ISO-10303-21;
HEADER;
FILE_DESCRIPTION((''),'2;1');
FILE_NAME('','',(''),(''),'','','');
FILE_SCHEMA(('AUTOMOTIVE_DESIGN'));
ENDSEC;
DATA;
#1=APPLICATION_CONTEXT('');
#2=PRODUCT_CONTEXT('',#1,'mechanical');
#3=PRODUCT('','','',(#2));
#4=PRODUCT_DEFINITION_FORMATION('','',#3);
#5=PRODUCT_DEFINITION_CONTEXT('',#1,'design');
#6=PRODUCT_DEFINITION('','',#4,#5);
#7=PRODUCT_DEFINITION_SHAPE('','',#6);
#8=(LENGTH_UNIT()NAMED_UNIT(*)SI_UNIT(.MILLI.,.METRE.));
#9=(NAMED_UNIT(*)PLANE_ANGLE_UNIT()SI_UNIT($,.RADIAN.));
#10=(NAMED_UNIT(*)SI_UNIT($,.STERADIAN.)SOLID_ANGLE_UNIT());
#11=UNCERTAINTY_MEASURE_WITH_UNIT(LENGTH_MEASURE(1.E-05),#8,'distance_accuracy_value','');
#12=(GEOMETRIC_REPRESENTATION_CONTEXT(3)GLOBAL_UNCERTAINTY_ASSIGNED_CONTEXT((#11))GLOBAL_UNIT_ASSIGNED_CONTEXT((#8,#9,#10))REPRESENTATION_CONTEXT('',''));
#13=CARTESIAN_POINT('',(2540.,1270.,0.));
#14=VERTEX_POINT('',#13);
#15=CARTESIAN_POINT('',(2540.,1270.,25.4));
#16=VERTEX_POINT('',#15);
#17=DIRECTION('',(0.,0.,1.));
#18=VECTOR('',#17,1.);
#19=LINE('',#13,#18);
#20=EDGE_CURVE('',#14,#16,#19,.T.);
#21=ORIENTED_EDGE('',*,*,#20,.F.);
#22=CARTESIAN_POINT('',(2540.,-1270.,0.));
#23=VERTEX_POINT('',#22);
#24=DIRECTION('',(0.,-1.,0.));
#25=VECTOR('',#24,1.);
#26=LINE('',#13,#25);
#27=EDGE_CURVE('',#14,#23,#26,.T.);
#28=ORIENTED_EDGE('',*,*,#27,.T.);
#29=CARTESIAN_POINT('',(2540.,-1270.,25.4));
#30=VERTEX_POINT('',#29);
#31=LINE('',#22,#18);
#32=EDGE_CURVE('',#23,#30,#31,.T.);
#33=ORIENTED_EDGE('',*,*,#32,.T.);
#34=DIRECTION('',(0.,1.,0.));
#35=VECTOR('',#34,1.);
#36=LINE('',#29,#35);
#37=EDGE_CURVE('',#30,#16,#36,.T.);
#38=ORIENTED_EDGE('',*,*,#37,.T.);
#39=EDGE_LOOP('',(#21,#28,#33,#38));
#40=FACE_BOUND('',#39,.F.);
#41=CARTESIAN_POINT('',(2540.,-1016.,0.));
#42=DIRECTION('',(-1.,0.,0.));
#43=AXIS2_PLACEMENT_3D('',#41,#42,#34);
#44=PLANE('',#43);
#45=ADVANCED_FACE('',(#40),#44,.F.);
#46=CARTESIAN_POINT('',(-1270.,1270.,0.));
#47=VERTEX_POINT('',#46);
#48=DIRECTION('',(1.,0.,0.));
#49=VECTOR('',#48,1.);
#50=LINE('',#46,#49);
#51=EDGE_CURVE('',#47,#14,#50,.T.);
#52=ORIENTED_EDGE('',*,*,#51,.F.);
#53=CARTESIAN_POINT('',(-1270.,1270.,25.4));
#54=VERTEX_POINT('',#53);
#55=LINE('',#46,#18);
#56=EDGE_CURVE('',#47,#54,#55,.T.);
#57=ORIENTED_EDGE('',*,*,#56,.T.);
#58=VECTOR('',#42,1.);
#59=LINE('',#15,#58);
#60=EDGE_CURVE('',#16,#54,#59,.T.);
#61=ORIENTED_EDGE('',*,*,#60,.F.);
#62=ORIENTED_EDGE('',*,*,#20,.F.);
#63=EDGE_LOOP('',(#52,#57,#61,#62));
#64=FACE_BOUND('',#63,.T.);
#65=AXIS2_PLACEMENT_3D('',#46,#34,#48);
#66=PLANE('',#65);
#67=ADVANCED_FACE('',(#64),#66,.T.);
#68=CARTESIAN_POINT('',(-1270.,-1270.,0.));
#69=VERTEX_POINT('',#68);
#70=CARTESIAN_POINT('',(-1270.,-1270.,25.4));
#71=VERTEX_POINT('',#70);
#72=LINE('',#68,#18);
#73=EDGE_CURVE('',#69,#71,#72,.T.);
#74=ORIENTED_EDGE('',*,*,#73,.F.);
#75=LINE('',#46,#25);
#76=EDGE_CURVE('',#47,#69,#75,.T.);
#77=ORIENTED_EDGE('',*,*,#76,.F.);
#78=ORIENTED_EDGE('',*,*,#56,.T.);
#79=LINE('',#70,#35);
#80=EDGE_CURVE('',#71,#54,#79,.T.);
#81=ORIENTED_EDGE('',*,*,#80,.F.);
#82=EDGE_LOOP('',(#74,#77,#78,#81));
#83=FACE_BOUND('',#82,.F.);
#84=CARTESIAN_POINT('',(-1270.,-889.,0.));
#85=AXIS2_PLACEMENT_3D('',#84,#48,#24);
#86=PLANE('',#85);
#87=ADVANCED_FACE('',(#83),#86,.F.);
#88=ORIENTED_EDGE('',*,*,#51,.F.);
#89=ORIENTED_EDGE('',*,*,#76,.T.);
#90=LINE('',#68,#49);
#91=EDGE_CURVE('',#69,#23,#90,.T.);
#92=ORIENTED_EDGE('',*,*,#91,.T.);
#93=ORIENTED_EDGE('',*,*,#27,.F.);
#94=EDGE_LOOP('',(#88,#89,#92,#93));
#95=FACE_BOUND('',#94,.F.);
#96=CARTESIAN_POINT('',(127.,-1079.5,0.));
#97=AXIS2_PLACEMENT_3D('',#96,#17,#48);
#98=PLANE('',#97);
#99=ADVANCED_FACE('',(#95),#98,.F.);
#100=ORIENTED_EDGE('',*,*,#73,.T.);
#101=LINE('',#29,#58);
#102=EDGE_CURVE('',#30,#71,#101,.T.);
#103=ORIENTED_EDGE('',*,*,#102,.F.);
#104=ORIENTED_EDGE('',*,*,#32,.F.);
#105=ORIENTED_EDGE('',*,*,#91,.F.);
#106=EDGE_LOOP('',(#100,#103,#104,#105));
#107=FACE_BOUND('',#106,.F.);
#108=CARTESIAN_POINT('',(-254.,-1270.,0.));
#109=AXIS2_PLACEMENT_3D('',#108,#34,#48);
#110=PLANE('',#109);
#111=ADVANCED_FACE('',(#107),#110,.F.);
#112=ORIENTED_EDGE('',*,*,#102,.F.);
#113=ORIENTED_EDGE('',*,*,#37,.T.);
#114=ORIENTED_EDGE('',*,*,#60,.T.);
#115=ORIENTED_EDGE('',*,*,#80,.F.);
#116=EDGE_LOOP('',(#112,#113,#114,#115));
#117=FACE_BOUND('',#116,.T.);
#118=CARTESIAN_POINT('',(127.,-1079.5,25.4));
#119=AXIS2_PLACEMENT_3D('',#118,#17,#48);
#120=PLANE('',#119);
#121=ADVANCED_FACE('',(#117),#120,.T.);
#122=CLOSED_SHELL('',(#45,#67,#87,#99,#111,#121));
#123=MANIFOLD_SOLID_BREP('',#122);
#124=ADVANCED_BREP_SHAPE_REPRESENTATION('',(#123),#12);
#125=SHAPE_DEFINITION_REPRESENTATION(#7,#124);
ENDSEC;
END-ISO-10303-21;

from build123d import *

# Parameters (mm, degrees)
F0_W     = 508
F0_H     = 381
F1_DEPTH = 25.4
F0_W_2   = 254
F0_H_2   = 254
F2_DEPTH = 25.4
F0_W_3   = 381
F0_H_3   = 127
F3_DEPTH = 25.4
F4_DEPTH = 25.4
F0_W_4   = 127
F0_H_4   = 508
F0_W_5   = 635
F5_DEPTH = 25.4
F6_DEPTH = 25.4
F7_DEPTH = 25.4


# Not quite as in the source:
# - a feature names something its author has since deleted; it is built from what else it names


with BuildPart() as f1:
    # F0 (on Top) → F1 (new body)
    with BuildSketch(Plane.XY):
        with Locations((-1016, 1079.5)):
            Rectangle(F0_W, F0_H)
    extrude(amount=F1_DEPTH)

    # F0 (on Top) → F2 (join)
    with BuildSketch(Plane.XY):
        Polygon((-127, 1270), (-762, 1270), (-762, 889), (-762, 508), (-127, 508), (-127, 762), align=None)
        Polygon((127, 1270), (-127, 1270), (-127, 762), (127, 762), (127, 889), align=None)
        Polygon((889, 1270), (127, 1270), (127, 889), (508, 889), (889, 889), align=None)
        Polygon((1397, 1270), (889, 1270), (889, 889), (889, 635), (1270, 635), (1397, 635), (1397, 889), align=None)
        with Locations((1651, 1079.5)):
            Rectangle(F0_W, F0_H)
        Polygon((2540, 1270), (1905, 1270), (1905, 889), (1905, 381), (2286, 381), (2540, 381), align=None)
        Polygon((-762, 889), (-1270, 889), (-1270, 508), (-1016, 508), (-762, 508), align=None)
        Polygon((-127, 508), (-762, 508), (-762, 381), (-127, 381), (508, 381), (508, 508), (127, 508), align=None)
        with Locations((0, 635)):
            Rectangle(F0_W_2, F0_H_2)
        Polygon((127, 889), (127, 762), (127, 508), (508, 508), (508, 889), align=None)
        Polygon((889, 889), (508, 889), (508, 508), (508, 381), (508, 254), (889, 254), (889, 635), align=None)
        Polygon((1270, 635), (889, 635), (889, 254), (889, 127), (1270, 127), align=None)
        Polygon((1397, 635), (1270, 635), (1270, 127), (1270, -127), (1270, -381), (1397, -381), (1397, 0), align=None)
        Polygon((1905, 889), (1397, 889), (1397, 635), (1397, 0), (1651, 0), (1905, 0), (1905, 381), align=None)
        Polygon((2286, 381), (1905, 381), (1905, 0), (1905, -254), (2286, -254), align=None)
        Polygon((2540, -508), (2540, 381), (2286, 381), (2286, -254), (2286, -508), align=None)
    extrude(amount=F2_DEPTH)

    # F0 (on Top) → F3 (join)
    with BuildSketch(Plane.XY):
        Polygon((-1016, 508), (-1270, 508), (-1270, -254), (-1016, -254), (-1016, 254), align=None)
        Polygon((-762, 381), (-762, 508), (-1016, 508), (-1016, 254), (-889, 254), (-762, 254), align=None)
        Polygon((-127, 381), (-762, 381), (-762, 254), (-762, -254), (-127, -254), (-127, 0), align=None)
        Polygon((508, 381), (-127, 381), (-127, 0), (254, 0), (508, 0), (508, 127), (508, 254), align=None)
        with Locations((698.5, 190.5)):
            Rectangle(F0_W_3, F0_H_3)
        Polygon((889, 127), (508, 127), (508, 0), (508, -127), (889, -127), (1270, -127), (1270, 127), align=None)
        with Locations((1079.5, -254)):
            Rectangle(F0_W_3, F0_H_2)
        Polygon((1524, -1016), (1524, -1270), (2032, -1270), (2032, -1016), (1905, -1016), (1651, -1016), align=None)
        Polygon((1651, -381), (1397, -381), (1270, -381), (889, -381), (889, -635), (889, -1016), (1524, -1016), (1651, -1016), (1651, -508), align=None)
        Polygon((1905, -254), (1651, -254), (1651, -381), (1651, -508), (1905, -508), (2286, -508), (2286, -254), align=None)
        Polygon((2540, -1016), (2540, -508), (2286, -508), (1905, -508), (1905, -1016), (2032, -1016), align=None)
    extrude(amount=F3_DEPTH)

    # F0 (on Top) → F4 (join)
    with BuildSketch(Plane.XY):
        Polygon((1651, 0), (1397, 0), (1397, -381), (1651, -381), (1651, -254), align=None)
        with Locations((1778, -127)):
            Rectangle(F0_W_2, F0_H_2)
    extrude(amount=F4_DEPTH)

    # F0 (on Top) → F5 (join)
    with BuildSketch(Plane.XY):
        Polygon((-1016, -254), (-1270, -254), (-1270, -889), (-889, -889), (-889, -254), align=None)
        with Locations((-952.5, 0)):
            Rectangle(F0_W_4, F0_H_4)
        Polygon((-762, -254), (-762, 254), (-889, 254), (-889, -254), (-889, -889), (-762, -889), (-762, -635), align=None)
        Polygon((-127, -254), (-762, -254), (-762, -635), (-254, -635), (-127, -635), (-127, -508), align=None)
        Polygon((254, 0), (-127, 0), (-127, -254), (-127, -508), (254, -508), align=None)
        Polygon((508, 0), (254, 0), (254, -508), (254, -635), (508, -635), (508, -127), align=None)
        Polygon((889, -127), (508, -127), (508, -635), (889, -635), (889, -381), align=None)
        with Locations((1206.5, -1143)):
            Rectangle(F0_W_5, F0_H_2)
        with Locations((1778, -762)):
            Rectangle(F0_W_2, F0_H_4)
        Polygon((1524, -1016), (1524, -1270), (2032, -1270), (2032, -1016), (1905, -1016), (1651, -1016), align=None)
        with Locations((2286, -1143)):
            Rectangle(F0_W, F0_H_2)
    extrude(amount=F5_DEPTH)

    # F0 (on Top) → F6 (join)
    with BuildSketch(Plane.XY):
        Polygon((-889, -889), (-1270, -889), (-1270, -1270), (-762, -1270), (-762, -889), align=None)
        Polygon((-762, -635), (-762, -889), (-762, -1270), (-254, -1270), (-254, -889), (-254, -635), align=None)
        with Locations((-190.5, -762)):
            Rectangle(F0_W_4, F0_H_2)
        Polygon((254, -508), (-127, -508), (-127, -635), (-127, -889), (254, -889), (254, -635), align=None)
        with Locations((381, -762)):
            Rectangle(F0_W_2, F0_H_2)
        Polygon((508, -889), (508, -1270), (889, -1270), (889, -1016), (889, -635), (508, -635), align=None)
    extrude(amount=F6_DEPTH)

    # F0 (on Top) → F7 (join)
    with BuildSketch(Plane.XY):
        Polygon((-254, -889), (-254, -1270), (508, -1270), (508, -889), (254, -889), (-127, -889), align=None)
    extrude(amount=F7_DEPTH)


solid = f1.part
